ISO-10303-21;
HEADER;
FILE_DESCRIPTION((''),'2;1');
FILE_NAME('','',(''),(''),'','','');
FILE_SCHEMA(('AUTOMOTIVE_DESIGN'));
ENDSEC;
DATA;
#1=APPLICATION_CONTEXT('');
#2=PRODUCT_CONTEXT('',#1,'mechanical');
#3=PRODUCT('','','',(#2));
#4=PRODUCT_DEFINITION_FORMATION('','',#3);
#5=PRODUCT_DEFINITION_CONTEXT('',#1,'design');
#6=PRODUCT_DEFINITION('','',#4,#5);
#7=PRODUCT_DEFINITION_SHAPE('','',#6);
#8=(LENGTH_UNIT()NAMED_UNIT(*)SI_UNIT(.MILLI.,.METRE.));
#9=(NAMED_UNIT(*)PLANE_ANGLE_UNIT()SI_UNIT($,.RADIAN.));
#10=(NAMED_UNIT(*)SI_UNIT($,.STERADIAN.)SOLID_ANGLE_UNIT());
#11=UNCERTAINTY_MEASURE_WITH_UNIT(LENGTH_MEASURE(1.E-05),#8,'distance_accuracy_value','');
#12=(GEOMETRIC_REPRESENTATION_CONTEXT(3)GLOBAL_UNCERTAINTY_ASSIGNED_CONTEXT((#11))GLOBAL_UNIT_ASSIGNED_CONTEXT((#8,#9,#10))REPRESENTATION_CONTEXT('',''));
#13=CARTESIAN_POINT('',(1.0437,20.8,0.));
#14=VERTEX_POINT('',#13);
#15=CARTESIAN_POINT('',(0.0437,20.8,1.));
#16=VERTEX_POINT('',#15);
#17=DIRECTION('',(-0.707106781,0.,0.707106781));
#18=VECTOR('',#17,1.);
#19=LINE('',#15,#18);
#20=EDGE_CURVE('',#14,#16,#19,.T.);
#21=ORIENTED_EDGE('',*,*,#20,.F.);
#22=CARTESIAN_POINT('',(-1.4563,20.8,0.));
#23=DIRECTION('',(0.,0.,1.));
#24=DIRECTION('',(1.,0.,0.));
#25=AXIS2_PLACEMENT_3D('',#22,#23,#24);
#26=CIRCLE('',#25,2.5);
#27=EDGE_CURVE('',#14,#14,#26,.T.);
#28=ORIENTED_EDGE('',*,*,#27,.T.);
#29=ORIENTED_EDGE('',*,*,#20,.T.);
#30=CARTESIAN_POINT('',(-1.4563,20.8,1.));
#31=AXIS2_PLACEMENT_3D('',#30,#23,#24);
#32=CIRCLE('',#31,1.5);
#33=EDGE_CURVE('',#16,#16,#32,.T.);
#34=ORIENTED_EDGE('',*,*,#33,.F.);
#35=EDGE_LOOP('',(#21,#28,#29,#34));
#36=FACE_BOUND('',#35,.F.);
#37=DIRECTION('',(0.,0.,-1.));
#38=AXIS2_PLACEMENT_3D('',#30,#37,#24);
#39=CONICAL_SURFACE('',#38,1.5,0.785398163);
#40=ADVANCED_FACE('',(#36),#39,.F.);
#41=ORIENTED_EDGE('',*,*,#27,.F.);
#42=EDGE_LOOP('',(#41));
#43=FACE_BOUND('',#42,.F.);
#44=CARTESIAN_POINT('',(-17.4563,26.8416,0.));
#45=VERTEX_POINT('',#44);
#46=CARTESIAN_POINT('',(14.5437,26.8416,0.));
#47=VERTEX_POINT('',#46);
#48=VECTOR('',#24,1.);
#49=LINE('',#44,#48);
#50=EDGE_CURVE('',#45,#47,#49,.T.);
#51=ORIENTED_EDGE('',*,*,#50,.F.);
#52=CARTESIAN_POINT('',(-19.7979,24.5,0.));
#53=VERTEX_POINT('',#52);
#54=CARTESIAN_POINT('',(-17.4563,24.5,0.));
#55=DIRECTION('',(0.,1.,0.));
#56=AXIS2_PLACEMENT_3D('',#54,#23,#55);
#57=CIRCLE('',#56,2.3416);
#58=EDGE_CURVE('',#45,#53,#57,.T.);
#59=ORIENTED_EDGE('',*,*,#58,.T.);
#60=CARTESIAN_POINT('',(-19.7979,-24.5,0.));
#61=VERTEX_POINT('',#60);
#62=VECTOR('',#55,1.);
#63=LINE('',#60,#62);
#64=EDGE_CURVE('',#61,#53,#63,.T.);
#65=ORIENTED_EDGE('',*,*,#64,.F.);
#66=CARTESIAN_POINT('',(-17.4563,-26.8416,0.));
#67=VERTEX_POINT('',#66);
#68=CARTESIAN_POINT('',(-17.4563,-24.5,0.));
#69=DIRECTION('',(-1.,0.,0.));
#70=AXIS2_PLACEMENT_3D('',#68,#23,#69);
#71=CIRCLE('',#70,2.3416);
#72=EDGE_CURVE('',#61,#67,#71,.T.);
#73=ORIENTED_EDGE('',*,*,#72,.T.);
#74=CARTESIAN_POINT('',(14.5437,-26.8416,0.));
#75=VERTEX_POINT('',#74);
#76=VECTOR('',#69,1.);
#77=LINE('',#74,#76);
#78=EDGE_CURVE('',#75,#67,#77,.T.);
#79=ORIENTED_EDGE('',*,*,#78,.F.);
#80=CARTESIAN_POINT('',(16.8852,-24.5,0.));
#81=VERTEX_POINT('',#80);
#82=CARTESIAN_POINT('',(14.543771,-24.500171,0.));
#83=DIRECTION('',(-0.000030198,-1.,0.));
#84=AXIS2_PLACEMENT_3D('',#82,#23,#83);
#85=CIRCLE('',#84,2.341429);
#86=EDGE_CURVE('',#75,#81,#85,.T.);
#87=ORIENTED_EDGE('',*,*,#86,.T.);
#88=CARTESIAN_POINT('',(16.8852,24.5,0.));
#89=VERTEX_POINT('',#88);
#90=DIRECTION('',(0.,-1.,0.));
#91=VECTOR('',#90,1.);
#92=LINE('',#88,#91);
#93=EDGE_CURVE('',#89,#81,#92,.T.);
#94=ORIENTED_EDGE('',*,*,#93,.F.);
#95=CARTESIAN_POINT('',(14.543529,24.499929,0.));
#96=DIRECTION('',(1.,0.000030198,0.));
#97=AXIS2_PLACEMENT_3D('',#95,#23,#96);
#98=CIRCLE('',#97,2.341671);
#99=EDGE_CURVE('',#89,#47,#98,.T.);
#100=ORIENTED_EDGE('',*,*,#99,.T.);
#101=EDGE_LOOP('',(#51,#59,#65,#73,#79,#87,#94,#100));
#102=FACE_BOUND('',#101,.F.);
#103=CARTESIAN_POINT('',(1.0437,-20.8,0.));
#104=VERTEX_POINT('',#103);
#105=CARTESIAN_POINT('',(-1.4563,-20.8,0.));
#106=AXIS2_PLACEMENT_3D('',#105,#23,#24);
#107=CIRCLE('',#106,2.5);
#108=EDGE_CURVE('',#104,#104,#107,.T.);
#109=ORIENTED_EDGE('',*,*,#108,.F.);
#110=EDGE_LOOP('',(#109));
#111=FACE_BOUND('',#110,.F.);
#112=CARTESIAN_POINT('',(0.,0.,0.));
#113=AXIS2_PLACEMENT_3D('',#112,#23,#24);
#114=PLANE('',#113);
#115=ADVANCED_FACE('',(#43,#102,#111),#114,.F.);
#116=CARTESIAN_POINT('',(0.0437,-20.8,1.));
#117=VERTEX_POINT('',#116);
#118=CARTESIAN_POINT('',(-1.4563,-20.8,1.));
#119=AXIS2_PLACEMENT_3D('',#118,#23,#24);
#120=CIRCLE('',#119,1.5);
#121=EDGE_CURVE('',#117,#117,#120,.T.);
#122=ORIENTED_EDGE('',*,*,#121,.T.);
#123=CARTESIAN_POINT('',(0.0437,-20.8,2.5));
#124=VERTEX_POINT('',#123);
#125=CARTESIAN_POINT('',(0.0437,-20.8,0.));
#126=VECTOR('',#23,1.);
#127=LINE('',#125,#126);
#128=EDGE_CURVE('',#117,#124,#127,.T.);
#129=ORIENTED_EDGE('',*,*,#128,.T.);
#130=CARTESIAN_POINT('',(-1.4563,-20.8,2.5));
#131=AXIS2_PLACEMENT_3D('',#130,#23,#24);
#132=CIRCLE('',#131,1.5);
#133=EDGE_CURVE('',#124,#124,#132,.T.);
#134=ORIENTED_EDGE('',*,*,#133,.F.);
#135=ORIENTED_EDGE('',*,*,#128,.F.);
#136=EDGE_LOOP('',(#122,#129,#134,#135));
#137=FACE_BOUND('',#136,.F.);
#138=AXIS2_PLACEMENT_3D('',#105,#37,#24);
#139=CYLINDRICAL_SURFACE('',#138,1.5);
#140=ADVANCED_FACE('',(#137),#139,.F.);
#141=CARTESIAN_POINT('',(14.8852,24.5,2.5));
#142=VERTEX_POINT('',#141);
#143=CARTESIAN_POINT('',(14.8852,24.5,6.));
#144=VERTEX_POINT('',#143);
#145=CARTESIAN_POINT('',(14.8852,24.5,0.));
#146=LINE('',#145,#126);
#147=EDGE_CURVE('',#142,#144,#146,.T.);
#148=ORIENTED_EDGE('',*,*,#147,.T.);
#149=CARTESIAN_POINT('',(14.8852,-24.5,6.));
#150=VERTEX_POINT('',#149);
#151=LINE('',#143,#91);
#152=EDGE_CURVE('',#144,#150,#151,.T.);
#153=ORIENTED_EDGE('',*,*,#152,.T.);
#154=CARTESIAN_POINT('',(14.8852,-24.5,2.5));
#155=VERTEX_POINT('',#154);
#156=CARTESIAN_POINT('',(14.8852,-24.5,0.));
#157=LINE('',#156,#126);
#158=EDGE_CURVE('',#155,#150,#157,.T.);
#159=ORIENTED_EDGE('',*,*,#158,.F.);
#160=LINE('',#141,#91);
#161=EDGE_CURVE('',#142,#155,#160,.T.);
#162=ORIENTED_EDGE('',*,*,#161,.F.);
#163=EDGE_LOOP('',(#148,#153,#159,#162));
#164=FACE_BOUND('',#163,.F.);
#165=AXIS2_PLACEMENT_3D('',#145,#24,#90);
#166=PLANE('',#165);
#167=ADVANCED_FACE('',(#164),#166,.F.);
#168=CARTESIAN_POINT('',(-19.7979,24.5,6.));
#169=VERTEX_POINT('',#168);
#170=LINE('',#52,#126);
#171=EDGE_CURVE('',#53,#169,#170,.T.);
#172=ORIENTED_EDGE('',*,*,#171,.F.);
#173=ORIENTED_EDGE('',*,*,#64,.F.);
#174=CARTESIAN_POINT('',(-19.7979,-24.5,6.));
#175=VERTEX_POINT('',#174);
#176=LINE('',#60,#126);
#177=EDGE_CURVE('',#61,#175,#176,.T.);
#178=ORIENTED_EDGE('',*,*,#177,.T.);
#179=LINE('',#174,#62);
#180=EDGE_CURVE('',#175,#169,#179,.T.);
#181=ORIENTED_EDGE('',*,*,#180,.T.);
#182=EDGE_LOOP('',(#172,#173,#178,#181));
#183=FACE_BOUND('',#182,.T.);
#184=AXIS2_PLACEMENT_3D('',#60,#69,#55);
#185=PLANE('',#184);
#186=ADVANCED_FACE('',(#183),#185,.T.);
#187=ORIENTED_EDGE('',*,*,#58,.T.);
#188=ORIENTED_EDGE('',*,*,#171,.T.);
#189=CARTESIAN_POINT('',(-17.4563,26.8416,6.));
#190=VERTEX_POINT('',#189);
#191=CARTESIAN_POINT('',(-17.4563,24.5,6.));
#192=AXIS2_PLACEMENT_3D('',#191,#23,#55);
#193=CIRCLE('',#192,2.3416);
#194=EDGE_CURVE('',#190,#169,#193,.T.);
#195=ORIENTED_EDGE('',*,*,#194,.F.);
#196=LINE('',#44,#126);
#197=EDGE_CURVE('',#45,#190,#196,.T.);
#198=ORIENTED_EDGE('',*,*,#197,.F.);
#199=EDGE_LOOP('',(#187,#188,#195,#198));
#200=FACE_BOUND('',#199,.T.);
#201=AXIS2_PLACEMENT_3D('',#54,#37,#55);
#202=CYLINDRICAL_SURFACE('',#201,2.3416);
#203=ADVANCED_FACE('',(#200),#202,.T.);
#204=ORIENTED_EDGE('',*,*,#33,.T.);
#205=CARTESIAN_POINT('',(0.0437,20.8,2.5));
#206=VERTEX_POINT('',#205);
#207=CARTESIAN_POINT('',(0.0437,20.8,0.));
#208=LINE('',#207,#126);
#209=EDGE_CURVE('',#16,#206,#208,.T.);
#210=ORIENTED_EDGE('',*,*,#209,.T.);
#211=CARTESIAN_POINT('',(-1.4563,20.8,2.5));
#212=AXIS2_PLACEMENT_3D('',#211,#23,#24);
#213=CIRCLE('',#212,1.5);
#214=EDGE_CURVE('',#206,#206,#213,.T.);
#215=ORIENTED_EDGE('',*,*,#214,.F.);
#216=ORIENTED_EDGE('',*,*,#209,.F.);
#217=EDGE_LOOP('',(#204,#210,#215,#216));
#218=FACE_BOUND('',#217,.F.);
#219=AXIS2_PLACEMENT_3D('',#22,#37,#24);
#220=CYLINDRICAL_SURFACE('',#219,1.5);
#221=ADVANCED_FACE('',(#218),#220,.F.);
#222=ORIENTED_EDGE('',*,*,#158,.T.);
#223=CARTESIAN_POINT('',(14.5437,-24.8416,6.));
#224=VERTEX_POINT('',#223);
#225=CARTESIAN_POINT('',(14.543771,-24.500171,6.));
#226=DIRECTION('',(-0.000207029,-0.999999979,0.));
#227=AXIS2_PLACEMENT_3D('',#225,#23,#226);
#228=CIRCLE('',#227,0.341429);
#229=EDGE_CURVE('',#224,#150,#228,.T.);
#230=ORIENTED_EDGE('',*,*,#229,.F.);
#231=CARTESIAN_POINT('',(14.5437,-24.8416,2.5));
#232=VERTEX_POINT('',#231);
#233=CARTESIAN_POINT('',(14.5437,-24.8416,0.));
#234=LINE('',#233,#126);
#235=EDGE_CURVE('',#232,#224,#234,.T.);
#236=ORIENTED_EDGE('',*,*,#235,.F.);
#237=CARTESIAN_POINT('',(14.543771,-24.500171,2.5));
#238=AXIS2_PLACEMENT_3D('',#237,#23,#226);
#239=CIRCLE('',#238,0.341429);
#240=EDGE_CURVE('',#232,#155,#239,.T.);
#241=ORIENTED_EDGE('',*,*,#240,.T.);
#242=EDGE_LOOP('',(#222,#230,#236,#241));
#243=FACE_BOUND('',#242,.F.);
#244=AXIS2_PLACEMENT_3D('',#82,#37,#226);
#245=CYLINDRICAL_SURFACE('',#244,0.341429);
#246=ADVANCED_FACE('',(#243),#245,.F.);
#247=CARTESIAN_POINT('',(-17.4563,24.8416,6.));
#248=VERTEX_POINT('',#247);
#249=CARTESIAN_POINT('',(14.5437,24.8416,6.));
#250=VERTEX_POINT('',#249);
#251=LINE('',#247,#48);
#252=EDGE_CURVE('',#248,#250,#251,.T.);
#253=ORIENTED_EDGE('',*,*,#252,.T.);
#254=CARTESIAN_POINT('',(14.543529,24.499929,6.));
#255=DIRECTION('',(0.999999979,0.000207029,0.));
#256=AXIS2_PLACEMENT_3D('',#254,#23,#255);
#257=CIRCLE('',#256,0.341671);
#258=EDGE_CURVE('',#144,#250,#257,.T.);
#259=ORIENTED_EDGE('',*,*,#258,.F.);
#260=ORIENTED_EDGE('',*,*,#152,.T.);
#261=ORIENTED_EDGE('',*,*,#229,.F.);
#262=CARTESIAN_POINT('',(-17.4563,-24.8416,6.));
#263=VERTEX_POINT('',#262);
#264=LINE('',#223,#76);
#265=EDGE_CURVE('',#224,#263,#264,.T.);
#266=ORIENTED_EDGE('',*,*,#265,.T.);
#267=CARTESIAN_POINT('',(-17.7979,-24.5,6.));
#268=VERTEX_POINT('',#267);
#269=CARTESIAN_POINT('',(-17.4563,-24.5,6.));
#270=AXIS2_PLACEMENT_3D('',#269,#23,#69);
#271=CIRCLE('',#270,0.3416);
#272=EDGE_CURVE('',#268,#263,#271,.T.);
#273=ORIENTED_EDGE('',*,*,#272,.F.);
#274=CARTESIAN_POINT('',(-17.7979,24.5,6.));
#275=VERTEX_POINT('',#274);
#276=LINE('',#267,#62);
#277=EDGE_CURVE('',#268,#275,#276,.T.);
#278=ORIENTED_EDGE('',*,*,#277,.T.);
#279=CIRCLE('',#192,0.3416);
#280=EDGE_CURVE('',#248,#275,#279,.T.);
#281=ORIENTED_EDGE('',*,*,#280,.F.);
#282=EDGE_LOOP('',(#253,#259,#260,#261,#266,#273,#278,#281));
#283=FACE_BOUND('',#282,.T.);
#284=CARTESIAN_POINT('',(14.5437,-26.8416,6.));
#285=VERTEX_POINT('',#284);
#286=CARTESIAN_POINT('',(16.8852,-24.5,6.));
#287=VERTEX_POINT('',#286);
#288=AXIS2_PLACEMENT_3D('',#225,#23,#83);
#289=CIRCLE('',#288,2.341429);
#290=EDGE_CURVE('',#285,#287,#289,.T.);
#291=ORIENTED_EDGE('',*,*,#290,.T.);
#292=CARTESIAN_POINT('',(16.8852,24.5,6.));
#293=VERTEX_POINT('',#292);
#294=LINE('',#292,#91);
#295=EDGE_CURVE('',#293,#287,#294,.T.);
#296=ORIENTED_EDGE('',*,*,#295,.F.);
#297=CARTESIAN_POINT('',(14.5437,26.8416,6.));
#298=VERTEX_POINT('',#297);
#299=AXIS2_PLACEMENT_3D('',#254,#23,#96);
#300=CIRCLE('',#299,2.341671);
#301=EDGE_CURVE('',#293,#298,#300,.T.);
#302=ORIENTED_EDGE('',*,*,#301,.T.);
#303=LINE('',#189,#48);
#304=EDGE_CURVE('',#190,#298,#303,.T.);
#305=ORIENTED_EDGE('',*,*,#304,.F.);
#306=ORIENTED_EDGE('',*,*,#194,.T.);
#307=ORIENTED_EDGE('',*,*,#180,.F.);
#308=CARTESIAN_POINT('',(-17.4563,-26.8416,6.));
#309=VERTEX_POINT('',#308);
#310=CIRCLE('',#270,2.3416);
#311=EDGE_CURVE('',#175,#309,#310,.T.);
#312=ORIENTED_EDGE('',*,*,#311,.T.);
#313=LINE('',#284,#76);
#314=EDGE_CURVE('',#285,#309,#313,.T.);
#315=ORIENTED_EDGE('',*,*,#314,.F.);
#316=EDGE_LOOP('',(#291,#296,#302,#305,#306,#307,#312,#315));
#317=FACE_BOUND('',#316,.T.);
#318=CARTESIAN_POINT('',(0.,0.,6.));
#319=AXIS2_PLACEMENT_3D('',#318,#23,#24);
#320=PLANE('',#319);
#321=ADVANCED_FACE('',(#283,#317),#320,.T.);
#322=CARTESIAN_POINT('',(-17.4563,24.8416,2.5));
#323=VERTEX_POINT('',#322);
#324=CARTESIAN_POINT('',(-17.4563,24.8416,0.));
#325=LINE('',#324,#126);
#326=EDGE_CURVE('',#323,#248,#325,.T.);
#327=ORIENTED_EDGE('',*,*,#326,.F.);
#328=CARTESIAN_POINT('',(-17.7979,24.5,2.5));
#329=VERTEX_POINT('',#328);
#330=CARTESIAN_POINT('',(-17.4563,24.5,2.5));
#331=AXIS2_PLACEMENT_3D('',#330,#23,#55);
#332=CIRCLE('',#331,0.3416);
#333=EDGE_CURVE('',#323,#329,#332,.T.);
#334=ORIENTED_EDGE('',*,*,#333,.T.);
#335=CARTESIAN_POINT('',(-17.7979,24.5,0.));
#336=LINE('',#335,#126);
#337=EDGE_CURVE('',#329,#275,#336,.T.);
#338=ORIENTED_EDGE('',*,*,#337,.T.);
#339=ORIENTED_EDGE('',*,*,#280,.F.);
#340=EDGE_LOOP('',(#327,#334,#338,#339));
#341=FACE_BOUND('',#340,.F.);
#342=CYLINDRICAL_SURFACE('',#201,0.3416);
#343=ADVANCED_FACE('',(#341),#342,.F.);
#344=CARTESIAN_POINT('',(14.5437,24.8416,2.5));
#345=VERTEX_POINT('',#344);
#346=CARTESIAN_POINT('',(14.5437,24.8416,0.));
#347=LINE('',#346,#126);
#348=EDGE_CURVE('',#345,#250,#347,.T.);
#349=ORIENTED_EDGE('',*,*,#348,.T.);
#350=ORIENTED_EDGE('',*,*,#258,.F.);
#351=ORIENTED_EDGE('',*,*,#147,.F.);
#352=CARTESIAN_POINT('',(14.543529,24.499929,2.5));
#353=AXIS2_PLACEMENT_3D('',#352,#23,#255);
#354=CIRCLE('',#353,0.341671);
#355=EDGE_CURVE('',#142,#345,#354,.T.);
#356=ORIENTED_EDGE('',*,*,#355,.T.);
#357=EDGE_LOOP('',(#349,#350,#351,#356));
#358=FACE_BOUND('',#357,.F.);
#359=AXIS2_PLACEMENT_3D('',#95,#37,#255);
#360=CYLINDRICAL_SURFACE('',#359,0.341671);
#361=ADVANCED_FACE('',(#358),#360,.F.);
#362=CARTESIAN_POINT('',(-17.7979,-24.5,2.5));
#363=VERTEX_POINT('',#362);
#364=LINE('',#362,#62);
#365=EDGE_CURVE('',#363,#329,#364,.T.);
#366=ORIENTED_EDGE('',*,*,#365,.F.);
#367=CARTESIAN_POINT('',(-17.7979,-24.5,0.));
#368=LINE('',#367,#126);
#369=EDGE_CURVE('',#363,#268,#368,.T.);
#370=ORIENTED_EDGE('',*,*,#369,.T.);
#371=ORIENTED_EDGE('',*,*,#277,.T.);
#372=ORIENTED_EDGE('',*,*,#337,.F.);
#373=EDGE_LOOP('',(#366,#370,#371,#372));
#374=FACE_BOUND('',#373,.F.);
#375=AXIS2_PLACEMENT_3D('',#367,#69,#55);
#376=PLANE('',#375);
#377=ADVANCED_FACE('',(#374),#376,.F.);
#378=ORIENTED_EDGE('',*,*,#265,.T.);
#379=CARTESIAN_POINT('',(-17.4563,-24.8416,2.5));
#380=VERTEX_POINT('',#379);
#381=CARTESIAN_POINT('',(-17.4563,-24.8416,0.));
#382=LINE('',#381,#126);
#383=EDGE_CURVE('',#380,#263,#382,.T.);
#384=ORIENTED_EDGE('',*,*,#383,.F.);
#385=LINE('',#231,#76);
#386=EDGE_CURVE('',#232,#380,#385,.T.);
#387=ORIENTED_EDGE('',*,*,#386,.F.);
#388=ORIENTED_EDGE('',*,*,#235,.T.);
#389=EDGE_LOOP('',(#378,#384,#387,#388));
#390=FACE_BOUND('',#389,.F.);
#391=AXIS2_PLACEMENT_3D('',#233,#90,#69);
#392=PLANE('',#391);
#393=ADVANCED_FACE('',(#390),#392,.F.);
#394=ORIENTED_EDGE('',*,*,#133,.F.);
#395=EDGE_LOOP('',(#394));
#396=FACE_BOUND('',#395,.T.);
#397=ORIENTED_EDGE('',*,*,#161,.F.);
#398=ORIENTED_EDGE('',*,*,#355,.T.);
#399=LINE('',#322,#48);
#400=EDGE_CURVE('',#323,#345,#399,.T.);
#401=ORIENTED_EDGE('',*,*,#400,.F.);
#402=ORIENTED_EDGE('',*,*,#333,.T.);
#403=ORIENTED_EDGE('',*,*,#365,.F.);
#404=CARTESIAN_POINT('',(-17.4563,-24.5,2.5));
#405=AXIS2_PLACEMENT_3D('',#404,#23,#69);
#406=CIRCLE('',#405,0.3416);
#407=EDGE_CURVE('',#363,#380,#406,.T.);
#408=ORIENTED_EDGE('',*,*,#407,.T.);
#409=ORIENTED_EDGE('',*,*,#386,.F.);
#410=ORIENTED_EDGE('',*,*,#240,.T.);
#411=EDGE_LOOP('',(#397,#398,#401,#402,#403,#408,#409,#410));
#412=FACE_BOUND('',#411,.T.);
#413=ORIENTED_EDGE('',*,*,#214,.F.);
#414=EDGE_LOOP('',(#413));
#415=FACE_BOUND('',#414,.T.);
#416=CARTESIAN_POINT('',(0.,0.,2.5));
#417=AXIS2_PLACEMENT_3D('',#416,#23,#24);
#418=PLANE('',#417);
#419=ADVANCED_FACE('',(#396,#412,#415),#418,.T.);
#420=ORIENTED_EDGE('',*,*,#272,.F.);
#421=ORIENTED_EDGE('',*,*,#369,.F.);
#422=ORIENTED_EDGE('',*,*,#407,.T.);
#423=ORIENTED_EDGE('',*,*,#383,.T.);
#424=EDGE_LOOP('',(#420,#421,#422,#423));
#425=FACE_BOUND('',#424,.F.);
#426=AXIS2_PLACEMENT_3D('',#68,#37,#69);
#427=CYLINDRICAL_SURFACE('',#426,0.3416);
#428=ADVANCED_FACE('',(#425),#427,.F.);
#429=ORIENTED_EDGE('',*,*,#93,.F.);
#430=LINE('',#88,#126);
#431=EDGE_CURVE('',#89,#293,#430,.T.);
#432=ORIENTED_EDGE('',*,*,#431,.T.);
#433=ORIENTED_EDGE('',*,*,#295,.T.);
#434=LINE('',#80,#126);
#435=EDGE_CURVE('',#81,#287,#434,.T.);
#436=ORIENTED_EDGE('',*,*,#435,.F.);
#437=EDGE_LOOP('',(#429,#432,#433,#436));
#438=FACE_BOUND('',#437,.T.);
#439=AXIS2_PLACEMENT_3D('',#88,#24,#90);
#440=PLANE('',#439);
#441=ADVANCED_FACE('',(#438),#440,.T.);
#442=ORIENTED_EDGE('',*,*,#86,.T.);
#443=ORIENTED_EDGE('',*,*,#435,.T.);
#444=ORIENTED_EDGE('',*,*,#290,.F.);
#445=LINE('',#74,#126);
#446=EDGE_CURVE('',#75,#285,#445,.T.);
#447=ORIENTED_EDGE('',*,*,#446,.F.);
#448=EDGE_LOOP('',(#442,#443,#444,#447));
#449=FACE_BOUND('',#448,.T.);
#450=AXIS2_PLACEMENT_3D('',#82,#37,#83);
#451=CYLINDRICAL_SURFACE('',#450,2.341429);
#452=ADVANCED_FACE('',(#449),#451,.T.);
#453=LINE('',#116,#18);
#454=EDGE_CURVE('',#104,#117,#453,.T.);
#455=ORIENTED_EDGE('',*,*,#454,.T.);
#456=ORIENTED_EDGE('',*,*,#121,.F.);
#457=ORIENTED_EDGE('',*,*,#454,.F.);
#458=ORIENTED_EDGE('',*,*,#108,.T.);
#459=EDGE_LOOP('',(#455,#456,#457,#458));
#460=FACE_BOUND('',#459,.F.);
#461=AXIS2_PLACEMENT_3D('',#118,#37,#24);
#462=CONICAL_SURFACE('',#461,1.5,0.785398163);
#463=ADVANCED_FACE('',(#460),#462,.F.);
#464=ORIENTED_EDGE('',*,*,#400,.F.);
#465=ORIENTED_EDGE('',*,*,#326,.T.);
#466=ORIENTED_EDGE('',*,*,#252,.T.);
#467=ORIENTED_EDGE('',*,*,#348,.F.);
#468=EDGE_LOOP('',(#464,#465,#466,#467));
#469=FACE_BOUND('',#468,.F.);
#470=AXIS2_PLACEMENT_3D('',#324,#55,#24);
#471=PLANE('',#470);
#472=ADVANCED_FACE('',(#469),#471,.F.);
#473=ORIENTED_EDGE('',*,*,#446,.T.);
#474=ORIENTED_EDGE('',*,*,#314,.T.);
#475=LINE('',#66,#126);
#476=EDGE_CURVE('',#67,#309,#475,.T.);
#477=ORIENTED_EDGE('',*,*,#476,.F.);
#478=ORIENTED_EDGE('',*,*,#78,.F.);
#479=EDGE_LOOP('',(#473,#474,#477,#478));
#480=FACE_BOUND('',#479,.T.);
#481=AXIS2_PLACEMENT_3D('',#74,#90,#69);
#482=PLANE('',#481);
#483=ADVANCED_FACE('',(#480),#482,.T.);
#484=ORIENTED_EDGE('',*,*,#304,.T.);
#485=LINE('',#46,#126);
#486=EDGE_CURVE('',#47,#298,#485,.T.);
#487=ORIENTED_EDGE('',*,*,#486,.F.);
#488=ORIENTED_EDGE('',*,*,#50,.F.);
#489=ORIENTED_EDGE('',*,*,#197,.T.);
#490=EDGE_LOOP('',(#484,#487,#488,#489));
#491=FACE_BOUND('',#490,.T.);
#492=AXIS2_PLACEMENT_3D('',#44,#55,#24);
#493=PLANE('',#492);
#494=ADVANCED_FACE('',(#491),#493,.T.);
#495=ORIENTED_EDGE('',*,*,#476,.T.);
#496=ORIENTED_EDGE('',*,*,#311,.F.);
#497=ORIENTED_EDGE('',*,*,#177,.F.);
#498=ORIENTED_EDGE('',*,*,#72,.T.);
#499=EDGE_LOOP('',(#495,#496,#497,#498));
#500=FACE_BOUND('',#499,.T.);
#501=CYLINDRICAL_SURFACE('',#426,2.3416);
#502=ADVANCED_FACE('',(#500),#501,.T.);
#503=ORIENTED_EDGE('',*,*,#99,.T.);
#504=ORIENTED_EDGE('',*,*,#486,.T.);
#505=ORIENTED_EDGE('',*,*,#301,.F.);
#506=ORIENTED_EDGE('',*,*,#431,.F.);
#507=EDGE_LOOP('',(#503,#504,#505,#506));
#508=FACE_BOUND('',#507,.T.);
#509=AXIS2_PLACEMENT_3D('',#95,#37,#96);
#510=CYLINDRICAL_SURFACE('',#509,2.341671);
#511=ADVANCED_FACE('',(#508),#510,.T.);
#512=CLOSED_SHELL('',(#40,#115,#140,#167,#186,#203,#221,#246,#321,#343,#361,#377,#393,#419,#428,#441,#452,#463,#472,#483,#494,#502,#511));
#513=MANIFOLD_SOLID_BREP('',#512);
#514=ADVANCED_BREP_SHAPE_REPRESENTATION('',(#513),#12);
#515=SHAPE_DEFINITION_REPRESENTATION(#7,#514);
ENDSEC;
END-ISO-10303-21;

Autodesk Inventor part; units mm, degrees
ref_plane "YZ Plane" through (0, 0, 0) normal (1, 0, 0) x (0, 1, 0)
ref_plane "XZ Plane" through (0, 0, 0) normal (0, 1, 0) x (-1, 0, 0)
ref_plane "XY Plane" through (0, 0, 0) normal (0, 0, 1) x (1, 0, 0)
sketch "Sketch1" plane through (0, 0, 0) normal (0, 0, 1) x (1, 0, 0)
  circle A0 centre (-1.4563, 20.8) radius 1.5
  circle A1 centre (-1.4563, -20.8) radius 1.5
  arc A2 (-17.4563, 26.8416) -> (-19.7979, 24.5) centre (-17.4563, 24.5) ccw
  line L0 (-19.7979, -24.5) -> (-19.7979, 24.5)
  arc A3 (-19.7979, -24.5) -> (-17.4563, -26.8416) centre (-17.4563, -24.5) ccw
  line L1 (14.5437, -26.8416) -> (-17.4563, -26.8416)
  arc A4 (14.5437, -26.8416) -> (16.8852, -24.5) centre (14.5437, -24.5) ccw
  line L2 (16.8852, 24.5) -> (16.8852, -24.5)
  arc A5 (16.8852, 24.5) -> (14.5437, 26.8416) centre (14.5437, 24.5) ccw
  line L3 (-17.4563, 26.8416) -> (14.5437, 26.8416)
  arc A6 (14.8852, 24.5) -> (14.5437, 24.8416) centre (14.5437, 24.5) ccw
  line L4 (14.8852, 24.5) -> (14.8852, -24.5)
  arc A7 (14.5437, -24.8416) -> (14.8852, -24.5) centre (14.5437, -24.5) ccw
  line L5 (14.5437, -24.8416) -> (-17.4563, -24.8416)
  arc A8 (-17.7979, -24.5) -> (-17.4563, -24.8416) centre (-17.4563, -24.5) ccw
  line L6 (-17.7979, -24.5) -> (-17.7979, 24.5)
  arc A9 (-17.4563, 24.8416) -> (-17.7979, 24.5) centre (-17.4563, 24.5) ccw
  line L7 (-17.4563, 24.8416) -> (14.5437, 24.8416)
  point P0 (0, 0)
  point P1 (0, 0)
  dimension "d0" = 2
extrude "Extrusion1" add sketch "Sketch1" along normal blind 6 contours L3 A5 L2 A4 L1 A3 L0 A2
extrude "Extrusion2" add sketch "Sketch1" along normal blind 2.5 contours L4 A7 L5 A8 L6 A9 L7 A6
sketch "Sketch2" plane through (0, 0, 2.5) normal (0, 0, 1) x (1, 0, 0)
  circle A0 centre (-1.4563, -20.8) radius 1.5 projected
  circle A1 centre (-1.4563, 20.8) radius 1.5 projected
  line L0 (14.8852, 24.5) -> (14.8852, -24.5) projected
  arc A2 (14.8852, 24.5) -> (14.5437, 24.8416) centre (14.5437, 24.5) ccw projected
  line L1 (-17.4563, 24.8416) -> (14.5437, 24.8416) projected
  arc A3 (-17.4563, 24.8416) -> (-17.7979, 24.5) centre (-17.4563, 24.5) ccw projected
  line L2 (-17.7979, -24.5) -> (-17.7979, 24.5) projected
  arc A4 (-17.7979, -24.5) -> (-17.4563, -24.8416) centre (-17.4563, -24.5) ccw projected
  line L3 (14.5437, -24.8416) -> (-17.4563, -24.8416) projected
  arc A5 (14.5437, -24.8416) -> (14.8852, -24.5) centre (14.5437, -24.5) ccw projected
  point P0 (0, 0)
chamfer "Chamfer1" distance 1 angle 45 2 edges at (-2.9563, -20.8, 0) (-2.9563, 20.8, 0)
properties part number "Tapa"
